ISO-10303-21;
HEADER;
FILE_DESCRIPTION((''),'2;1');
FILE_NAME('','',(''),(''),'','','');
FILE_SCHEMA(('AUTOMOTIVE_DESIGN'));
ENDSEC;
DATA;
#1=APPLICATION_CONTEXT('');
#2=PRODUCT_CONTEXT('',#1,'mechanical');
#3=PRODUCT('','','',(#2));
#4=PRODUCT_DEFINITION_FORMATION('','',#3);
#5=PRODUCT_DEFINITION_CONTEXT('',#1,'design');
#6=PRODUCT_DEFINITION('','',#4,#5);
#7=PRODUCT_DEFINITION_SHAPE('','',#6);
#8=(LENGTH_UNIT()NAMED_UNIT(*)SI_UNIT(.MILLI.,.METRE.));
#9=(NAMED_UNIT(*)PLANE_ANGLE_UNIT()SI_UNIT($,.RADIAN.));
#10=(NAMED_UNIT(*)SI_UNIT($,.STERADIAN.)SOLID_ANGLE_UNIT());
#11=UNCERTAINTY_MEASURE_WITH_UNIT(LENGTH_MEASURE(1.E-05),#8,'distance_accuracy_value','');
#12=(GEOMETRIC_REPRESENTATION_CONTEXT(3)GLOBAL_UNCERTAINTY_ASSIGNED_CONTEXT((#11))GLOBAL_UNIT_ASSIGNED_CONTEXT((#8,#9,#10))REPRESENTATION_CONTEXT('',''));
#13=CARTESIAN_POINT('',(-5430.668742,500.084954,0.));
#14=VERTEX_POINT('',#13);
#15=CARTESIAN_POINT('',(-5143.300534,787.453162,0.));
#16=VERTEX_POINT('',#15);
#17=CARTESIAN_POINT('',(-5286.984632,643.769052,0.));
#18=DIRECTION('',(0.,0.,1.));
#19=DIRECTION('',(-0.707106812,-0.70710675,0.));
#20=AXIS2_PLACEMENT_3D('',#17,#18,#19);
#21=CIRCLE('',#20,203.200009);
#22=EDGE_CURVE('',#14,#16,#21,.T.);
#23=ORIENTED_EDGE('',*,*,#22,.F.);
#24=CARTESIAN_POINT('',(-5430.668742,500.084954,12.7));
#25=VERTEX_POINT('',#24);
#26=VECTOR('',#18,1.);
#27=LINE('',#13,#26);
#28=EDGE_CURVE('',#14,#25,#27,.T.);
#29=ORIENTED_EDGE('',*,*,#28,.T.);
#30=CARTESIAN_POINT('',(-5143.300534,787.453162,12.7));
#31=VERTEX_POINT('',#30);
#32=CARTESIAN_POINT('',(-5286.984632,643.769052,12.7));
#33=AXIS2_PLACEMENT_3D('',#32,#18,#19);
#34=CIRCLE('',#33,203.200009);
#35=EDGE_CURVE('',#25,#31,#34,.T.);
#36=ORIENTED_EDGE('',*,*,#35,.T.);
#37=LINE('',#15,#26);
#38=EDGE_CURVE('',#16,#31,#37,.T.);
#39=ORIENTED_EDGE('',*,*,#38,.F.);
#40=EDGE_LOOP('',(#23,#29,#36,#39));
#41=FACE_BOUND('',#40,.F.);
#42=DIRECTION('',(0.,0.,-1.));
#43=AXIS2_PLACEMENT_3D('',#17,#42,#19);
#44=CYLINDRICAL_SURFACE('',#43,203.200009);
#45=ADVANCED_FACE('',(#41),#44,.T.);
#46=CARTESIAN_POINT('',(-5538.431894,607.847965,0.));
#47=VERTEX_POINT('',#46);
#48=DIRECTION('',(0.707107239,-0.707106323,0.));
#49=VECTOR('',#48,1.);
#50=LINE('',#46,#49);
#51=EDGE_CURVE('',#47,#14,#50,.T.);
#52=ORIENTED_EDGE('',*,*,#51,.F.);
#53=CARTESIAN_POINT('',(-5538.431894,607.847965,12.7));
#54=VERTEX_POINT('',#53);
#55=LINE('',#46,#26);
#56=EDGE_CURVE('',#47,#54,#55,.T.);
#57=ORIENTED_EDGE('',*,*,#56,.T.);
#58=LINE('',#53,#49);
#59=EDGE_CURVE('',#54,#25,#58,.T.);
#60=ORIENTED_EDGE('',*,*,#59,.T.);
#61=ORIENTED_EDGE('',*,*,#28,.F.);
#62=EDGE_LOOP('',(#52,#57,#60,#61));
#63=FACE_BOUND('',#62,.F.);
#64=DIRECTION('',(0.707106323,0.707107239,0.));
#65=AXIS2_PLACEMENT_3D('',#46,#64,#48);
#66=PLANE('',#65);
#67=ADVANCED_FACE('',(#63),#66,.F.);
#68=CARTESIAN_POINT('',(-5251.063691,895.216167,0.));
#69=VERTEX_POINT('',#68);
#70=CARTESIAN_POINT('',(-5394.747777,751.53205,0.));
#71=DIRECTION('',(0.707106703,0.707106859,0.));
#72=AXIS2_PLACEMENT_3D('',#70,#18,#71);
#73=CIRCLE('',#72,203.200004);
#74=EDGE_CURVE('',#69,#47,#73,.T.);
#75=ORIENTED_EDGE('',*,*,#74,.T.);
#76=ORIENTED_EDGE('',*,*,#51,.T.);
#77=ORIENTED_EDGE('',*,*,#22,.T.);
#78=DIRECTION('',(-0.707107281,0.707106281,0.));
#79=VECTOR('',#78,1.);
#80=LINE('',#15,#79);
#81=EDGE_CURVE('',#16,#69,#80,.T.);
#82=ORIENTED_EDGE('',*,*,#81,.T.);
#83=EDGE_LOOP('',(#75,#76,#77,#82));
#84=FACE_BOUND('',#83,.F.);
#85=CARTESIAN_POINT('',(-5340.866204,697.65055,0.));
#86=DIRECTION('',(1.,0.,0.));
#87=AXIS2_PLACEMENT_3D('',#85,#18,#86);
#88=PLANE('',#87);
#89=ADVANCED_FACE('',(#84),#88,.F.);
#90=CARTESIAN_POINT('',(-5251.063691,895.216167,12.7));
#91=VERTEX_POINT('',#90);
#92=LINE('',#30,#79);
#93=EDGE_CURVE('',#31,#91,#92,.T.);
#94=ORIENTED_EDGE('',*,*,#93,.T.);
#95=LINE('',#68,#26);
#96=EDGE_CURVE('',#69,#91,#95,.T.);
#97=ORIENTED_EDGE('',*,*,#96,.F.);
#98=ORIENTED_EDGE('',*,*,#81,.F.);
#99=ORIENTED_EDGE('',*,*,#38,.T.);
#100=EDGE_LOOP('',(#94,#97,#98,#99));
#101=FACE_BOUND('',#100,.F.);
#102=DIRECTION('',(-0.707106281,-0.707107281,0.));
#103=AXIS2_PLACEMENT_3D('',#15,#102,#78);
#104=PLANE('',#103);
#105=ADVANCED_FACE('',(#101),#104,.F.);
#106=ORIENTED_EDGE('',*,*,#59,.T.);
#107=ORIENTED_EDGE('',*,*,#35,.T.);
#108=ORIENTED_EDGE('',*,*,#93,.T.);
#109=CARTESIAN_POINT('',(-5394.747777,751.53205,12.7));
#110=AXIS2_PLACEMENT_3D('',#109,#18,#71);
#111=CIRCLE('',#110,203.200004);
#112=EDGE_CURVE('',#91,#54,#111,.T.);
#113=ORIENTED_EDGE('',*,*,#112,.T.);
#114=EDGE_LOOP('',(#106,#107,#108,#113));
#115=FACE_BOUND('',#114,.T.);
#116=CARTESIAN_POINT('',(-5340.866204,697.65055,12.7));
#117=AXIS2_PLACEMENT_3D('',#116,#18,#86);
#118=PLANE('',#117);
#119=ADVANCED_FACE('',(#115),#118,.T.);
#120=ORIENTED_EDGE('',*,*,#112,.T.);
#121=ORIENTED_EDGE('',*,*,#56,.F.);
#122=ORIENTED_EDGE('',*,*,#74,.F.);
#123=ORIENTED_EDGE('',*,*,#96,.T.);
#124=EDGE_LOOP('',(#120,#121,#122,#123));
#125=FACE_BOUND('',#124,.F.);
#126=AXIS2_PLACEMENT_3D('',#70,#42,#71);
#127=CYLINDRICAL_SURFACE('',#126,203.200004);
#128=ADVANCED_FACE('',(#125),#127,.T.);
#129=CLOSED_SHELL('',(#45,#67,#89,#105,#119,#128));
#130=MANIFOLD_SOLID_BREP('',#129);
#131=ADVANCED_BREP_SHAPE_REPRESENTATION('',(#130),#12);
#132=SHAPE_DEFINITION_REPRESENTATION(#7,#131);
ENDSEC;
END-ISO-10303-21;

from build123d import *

# Parameters (mm, degrees)
F1_DEPTH = 12.7


# Not quite as in the source:
# - ends of sketch curves that miss each other by under 0.0002 mm in the source are joined


with BuildPart() as f1:
    # F0 (on Top) → F1 (new body)
    with BuildSketch(Plane.XY):
        with BuildLine():
            Line((-5143.3005338, 787.4531622), (-5251.0636914, 895.2161674))
            ThreePointArc((-5251.0636914, 895.2161674), (-5538.4318809371, 895.2161483371), (-5538.4318936371, 607.8479651629))
            Line((-5538.4318936371, 607.8479651629), (-5430.6687424, 500.0849536))
            ThreePointArc((-5430.6687424, 500.0849536), (-5143.3005274629, 500.0849472629), (-5143.3005338, 787.4531622))
        make_face()
    extrude(amount=F1_DEPTH)


solid = f1.part
